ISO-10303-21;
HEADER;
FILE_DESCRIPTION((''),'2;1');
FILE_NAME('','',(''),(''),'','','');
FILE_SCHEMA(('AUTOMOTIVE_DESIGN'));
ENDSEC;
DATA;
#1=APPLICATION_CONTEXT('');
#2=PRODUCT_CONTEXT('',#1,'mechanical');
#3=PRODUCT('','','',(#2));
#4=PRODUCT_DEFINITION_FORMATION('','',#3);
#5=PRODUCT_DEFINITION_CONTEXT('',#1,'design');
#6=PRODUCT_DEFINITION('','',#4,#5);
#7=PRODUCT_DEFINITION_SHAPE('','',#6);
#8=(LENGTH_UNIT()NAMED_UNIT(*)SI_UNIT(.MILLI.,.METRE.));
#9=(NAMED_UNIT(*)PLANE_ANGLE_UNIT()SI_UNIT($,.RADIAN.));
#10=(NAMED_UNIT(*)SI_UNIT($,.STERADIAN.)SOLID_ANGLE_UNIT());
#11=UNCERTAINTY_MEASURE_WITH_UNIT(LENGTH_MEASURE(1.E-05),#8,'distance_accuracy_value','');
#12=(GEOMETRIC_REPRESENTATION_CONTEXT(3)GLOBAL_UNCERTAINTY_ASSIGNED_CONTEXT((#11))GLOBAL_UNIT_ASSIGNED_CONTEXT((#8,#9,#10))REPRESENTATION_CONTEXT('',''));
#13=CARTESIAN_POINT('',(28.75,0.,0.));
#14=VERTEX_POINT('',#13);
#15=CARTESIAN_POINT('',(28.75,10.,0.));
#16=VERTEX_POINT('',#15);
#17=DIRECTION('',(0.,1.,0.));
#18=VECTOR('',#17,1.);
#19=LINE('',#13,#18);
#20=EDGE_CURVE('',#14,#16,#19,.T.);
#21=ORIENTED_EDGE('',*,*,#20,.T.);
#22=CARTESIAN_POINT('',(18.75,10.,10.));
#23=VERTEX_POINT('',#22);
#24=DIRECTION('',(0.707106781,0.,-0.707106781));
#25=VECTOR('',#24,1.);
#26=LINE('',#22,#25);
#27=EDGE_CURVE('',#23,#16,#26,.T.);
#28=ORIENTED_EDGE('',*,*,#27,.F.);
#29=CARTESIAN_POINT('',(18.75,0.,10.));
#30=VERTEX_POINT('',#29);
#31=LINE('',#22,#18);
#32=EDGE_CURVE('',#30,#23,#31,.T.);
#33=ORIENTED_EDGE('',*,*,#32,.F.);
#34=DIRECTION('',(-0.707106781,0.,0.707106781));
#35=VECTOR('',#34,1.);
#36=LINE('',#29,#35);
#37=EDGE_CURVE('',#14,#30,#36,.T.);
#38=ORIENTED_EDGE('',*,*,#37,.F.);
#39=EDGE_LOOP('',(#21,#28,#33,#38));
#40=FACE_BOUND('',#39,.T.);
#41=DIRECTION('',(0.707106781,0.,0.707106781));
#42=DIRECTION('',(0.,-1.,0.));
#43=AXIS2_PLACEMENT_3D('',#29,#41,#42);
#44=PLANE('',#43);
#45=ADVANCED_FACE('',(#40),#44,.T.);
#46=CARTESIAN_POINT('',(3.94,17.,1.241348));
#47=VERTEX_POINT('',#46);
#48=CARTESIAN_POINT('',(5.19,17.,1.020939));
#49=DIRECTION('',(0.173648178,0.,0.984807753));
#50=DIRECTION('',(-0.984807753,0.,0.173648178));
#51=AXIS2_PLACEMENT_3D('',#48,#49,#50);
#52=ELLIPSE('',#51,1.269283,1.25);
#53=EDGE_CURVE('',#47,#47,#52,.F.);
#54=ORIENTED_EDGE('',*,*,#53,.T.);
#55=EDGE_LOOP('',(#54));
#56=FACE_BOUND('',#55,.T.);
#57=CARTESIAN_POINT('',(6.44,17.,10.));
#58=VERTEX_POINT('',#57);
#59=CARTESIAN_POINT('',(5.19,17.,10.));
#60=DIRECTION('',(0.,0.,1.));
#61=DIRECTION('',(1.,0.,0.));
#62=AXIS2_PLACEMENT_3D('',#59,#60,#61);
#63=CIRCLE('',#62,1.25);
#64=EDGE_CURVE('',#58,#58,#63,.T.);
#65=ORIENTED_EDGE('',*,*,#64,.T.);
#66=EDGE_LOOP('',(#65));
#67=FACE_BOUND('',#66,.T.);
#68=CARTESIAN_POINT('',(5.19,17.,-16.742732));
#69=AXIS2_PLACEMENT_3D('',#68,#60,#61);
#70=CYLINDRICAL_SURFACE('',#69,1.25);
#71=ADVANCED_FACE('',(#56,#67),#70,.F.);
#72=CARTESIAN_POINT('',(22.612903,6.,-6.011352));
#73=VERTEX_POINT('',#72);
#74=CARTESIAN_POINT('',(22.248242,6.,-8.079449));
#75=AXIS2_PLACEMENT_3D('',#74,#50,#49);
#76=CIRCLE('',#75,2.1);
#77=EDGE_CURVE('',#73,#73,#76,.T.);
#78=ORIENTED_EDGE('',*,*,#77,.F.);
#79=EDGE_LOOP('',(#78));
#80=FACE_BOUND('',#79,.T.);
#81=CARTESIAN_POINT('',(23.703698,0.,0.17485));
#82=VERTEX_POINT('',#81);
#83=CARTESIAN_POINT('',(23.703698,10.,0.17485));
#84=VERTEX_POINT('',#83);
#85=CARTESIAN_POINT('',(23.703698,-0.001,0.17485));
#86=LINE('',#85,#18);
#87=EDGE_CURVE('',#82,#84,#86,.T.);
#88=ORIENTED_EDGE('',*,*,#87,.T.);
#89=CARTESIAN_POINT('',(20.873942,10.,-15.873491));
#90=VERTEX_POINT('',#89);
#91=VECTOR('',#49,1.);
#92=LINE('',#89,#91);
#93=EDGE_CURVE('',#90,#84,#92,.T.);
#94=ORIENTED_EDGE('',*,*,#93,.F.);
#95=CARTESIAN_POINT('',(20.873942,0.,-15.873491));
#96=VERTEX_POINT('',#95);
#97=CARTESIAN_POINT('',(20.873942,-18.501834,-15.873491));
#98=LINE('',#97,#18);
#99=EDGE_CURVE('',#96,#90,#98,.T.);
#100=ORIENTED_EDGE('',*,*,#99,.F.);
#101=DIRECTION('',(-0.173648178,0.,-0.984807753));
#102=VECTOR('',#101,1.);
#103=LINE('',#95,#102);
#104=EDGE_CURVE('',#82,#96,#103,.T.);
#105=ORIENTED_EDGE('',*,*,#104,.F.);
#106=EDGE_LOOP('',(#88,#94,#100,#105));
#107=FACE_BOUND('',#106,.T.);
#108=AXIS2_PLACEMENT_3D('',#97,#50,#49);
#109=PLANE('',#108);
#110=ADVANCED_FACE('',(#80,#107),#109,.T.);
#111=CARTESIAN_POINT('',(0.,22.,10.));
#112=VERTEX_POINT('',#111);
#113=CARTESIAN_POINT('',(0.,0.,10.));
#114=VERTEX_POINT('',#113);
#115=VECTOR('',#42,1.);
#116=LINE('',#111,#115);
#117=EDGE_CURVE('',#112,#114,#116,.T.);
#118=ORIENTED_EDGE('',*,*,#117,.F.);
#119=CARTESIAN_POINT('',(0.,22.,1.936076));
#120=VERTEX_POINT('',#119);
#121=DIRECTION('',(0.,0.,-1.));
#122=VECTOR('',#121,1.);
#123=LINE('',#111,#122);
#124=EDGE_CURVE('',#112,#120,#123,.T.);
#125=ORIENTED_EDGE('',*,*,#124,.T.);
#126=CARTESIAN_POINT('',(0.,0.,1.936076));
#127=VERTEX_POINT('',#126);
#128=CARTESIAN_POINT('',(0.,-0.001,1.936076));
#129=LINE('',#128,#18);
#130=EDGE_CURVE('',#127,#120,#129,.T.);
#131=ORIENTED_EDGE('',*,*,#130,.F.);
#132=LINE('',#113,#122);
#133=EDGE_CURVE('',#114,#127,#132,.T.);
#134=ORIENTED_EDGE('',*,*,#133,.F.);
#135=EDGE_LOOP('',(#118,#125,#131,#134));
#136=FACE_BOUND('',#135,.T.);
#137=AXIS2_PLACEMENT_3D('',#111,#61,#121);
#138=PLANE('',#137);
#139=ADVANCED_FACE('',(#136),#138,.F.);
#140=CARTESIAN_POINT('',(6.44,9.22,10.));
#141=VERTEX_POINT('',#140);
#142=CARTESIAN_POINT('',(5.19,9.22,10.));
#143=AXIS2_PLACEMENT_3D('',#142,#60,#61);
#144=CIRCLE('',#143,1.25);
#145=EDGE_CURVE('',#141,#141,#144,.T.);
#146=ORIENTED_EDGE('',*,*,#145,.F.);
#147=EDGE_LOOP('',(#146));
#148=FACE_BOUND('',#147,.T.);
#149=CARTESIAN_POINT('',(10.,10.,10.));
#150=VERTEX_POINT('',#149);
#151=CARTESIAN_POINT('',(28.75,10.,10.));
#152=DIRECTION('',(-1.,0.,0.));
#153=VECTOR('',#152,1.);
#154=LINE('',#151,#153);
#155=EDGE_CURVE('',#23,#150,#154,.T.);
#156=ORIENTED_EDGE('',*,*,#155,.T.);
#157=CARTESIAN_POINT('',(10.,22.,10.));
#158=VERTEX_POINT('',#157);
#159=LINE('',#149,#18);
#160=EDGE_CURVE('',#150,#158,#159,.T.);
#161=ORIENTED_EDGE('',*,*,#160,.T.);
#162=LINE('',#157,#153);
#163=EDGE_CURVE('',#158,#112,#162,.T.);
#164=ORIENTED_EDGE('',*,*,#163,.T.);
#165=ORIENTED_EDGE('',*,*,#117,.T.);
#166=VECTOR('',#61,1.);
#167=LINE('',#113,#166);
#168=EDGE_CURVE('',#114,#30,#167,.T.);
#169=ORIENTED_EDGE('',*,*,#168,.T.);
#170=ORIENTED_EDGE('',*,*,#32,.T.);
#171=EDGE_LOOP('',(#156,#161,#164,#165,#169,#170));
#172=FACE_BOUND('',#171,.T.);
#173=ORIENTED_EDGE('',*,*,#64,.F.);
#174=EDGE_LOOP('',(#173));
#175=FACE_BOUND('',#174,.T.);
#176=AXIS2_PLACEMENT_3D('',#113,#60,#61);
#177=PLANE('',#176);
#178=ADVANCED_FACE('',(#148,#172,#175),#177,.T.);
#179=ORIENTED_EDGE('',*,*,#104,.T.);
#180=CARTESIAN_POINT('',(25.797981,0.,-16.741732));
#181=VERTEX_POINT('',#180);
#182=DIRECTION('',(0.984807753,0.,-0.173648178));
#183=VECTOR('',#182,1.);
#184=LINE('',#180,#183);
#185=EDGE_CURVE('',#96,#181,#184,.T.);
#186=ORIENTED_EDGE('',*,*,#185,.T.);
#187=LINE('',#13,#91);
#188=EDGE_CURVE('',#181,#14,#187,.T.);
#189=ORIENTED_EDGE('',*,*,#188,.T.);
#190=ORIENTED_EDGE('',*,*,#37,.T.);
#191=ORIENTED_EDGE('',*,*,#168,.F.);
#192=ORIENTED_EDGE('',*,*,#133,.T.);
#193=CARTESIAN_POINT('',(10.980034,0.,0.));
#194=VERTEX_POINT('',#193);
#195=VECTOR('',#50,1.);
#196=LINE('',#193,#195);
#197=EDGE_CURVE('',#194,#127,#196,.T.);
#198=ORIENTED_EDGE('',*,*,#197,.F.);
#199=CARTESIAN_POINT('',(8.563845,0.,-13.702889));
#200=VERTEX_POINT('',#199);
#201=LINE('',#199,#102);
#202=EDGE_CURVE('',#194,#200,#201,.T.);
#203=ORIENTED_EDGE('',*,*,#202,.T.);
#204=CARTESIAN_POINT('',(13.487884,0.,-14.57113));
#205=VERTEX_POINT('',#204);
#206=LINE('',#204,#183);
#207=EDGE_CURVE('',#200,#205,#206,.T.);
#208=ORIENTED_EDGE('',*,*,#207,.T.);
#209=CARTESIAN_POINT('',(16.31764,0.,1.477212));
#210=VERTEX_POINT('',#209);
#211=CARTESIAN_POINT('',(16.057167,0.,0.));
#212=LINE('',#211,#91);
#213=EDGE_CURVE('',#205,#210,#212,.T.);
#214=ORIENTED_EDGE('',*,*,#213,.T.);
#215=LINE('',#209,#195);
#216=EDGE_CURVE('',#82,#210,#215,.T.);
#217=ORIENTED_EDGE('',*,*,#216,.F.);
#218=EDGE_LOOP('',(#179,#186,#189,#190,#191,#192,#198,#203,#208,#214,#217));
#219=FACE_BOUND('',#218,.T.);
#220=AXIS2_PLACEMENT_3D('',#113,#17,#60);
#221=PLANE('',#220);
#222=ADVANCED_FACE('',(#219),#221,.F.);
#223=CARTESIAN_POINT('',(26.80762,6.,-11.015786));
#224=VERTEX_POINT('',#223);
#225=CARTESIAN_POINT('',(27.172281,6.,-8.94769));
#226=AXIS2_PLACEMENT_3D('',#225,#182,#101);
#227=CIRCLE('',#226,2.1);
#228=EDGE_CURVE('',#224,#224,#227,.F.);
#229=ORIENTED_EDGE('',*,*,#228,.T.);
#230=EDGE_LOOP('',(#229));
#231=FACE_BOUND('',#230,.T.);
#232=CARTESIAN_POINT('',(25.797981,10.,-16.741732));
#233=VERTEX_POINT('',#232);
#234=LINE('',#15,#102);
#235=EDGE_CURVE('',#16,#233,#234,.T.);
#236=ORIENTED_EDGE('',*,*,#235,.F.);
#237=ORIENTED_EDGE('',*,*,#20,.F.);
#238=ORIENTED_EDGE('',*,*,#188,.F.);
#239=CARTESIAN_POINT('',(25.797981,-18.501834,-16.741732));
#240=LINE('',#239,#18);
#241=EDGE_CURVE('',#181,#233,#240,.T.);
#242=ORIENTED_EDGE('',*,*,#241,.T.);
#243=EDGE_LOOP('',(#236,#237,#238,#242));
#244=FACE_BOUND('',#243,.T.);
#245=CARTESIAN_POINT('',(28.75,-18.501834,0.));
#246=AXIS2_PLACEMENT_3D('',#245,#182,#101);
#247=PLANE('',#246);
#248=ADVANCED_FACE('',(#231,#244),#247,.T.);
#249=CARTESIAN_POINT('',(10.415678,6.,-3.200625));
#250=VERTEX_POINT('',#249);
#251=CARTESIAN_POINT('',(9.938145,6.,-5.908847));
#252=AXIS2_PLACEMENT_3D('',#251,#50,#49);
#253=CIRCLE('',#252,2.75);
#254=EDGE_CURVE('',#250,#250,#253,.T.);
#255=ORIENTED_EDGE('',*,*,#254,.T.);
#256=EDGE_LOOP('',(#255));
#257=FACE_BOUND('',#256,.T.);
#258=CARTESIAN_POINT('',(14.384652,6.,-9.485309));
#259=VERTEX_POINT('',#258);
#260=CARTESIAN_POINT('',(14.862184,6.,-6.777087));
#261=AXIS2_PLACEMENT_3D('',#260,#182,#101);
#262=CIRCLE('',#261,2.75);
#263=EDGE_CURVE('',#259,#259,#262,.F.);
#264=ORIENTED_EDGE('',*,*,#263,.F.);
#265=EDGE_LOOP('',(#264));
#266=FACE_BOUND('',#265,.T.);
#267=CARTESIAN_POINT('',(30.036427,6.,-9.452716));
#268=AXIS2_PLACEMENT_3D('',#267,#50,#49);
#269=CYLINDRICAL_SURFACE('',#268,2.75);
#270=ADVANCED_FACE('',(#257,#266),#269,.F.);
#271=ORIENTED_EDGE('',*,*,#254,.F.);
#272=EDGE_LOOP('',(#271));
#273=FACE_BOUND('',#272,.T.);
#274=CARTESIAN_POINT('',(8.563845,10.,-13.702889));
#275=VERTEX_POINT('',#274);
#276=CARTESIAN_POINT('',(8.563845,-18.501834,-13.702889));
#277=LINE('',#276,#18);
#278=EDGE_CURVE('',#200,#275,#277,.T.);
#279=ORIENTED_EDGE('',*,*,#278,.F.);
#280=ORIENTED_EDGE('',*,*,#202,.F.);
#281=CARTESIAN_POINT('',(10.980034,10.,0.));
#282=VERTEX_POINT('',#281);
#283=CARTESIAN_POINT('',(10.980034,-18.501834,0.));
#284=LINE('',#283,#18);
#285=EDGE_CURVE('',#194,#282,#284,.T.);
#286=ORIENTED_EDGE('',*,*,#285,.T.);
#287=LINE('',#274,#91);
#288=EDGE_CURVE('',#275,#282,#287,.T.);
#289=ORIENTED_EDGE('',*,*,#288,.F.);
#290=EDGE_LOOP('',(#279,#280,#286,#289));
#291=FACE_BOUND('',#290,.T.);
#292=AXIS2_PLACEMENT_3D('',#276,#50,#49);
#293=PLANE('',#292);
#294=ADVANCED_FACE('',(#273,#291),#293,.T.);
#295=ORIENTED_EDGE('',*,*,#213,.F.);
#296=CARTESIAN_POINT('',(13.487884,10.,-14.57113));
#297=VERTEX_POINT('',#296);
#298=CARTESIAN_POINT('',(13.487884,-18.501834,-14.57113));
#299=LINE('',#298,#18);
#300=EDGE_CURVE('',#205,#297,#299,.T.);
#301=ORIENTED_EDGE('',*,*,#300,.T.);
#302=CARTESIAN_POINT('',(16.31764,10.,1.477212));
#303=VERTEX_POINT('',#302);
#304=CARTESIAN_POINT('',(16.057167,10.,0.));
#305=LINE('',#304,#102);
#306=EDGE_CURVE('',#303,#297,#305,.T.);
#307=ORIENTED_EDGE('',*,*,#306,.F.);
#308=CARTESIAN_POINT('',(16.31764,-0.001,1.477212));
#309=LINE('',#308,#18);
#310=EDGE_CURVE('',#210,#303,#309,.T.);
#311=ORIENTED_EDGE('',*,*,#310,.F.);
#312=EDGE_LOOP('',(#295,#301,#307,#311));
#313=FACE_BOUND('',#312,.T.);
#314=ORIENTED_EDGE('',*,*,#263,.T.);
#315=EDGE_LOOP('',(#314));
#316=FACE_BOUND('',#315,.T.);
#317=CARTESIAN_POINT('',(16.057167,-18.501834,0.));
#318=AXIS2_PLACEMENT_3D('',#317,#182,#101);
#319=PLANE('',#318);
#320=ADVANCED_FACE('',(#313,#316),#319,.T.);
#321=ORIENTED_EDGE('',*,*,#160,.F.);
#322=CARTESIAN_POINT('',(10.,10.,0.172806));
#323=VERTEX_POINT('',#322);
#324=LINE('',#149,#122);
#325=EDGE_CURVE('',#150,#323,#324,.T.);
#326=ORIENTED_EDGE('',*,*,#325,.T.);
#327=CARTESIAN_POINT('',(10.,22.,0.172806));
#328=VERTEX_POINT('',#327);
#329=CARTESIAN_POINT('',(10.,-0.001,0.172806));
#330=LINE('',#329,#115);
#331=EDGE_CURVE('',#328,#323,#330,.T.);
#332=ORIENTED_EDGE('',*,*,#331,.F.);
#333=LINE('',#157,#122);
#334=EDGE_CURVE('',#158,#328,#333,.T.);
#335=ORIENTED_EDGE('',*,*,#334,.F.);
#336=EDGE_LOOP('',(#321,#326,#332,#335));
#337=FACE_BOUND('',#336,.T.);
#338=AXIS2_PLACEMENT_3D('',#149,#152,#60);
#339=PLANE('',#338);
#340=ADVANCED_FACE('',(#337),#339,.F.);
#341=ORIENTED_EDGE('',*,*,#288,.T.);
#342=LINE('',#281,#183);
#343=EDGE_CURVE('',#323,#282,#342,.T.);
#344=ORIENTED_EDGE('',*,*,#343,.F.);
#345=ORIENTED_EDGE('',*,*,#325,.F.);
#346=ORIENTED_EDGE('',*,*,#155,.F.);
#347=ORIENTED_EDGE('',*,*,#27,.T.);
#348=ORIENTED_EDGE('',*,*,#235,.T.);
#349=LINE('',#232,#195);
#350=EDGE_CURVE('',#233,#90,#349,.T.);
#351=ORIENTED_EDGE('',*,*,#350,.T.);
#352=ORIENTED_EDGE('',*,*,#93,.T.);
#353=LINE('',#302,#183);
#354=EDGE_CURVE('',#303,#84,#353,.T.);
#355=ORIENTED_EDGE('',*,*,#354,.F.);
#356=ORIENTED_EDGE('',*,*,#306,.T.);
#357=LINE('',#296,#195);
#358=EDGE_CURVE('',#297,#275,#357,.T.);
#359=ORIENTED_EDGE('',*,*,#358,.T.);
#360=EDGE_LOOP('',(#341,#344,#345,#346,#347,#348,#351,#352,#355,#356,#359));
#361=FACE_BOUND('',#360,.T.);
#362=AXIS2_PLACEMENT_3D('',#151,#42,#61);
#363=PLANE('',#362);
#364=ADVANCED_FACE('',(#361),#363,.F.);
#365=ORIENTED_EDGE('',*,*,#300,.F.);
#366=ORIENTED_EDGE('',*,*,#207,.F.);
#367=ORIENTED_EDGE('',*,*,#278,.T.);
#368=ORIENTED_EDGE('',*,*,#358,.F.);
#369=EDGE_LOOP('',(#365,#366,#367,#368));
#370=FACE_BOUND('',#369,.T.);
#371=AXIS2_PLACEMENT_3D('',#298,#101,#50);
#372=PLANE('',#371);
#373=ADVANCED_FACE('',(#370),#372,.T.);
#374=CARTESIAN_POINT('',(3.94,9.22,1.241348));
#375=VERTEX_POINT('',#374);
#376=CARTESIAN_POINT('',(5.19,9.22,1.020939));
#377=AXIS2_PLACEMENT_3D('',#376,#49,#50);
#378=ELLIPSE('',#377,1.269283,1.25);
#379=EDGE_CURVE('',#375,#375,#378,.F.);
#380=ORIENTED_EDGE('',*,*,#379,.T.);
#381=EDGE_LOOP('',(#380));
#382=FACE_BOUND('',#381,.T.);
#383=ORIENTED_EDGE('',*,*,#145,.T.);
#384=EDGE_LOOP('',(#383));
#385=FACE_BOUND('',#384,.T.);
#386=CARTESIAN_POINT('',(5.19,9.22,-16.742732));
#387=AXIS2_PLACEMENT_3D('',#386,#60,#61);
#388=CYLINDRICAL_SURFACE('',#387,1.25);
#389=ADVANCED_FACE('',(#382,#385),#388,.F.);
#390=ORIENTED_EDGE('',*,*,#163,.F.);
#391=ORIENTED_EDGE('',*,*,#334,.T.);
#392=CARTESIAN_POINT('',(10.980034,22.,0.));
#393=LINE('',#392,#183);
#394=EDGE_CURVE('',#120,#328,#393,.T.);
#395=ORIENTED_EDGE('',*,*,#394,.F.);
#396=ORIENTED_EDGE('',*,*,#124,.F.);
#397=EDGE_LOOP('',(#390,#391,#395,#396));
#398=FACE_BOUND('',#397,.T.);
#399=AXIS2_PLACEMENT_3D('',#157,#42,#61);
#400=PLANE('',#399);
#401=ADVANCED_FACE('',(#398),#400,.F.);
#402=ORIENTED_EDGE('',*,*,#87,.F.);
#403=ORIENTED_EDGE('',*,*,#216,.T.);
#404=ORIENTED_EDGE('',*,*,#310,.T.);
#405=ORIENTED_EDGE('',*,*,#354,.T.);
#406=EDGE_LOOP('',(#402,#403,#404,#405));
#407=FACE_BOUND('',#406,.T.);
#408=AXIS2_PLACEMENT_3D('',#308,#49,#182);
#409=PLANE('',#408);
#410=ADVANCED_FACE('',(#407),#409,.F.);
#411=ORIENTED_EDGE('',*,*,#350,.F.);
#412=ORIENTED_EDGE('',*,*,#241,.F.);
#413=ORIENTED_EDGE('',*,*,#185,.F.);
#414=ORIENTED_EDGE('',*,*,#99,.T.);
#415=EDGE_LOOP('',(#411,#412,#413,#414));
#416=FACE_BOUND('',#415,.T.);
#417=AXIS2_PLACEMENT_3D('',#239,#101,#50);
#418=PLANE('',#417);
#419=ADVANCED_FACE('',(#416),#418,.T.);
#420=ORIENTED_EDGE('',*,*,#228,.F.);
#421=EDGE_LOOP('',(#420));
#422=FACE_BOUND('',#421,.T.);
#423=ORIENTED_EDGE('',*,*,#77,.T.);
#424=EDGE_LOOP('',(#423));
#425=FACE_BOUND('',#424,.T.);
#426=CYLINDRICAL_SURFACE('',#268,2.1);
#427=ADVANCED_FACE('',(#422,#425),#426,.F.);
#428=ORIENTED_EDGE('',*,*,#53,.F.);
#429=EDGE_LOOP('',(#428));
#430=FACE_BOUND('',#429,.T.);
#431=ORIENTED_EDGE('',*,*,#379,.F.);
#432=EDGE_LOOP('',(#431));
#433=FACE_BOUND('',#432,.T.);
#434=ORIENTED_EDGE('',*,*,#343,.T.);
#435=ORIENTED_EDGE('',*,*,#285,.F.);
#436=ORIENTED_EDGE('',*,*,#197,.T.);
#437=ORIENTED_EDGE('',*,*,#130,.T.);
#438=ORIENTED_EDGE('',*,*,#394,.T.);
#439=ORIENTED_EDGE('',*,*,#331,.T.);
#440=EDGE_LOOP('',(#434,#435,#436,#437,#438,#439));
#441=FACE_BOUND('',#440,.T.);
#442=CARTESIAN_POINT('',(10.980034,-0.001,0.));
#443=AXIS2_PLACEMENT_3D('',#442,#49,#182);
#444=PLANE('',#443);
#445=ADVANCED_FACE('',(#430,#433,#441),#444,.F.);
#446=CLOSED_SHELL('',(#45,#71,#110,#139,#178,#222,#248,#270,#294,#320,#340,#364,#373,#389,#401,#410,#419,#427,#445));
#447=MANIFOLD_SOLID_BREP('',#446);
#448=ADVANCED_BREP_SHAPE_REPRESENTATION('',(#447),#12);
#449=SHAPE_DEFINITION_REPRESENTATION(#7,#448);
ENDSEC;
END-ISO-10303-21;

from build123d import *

# Parameters (mm, degrees)
BOSS_EXTRU_1_DEPTH      = 10
BOSS_EXTRU_2_DEPTH      = 10
ENL_V_MAT_EXTRU_1_REACH = 37.367
ENL_V_MAT_EXTRU_2_REACH = 34.134
ESQUISSE4_R             = 2.75
ENL_V_MAT_EXTRU_3_REACH = 36.763
ESQUISSE5_R             = 2.1
CHANFREIN1_SIZE         = 10
ENL_V_MAT_EXTRU_4_REACH = 41.885
ENL_V_MAT_EXTRU_5_REACH = 47.008
ESQUISSE7_R             = 1.25


with BuildPart() as part:
    # Esquisse1 → Boss.-Extru.1 (new body)
    with BuildSketch(Plane.XY):
        Polygon((0, 0), (28.75, 0), (28.75, 10), (10, 10), (10, 22), (0, 22), align=None)
    extrude(amount=BOSS_EXTRU_1_DEPTH)

    # Esquisse2 → Boss.-Extru.2 (add)
    with BuildSketch(Plane(origin=(0, 10, 0), x_dir=(1, 0, 0), z_dir=(0, 1, 0))):
        Polygon((28.75, 0), (25.79798098, 16.741731801), (20.873942215, 15.873490913), (23.672866941, 0), align=None)
        Polygon((16.057167351, 0), (13.487884067, 14.57112958), (8.563845302, 13.702888692), (10.980034292, 0), align=None)
    extrude(amount=-BOSS_EXTRU_2_DEPTH)

    # Esquisse3 → Enlèv. mat.-Extru.1 (cut, up to next)
    with BuildSketch(Plane(origin=(0, 10, 0), x_dir=(1, 0, 0), z_dir=(0, 1, 0)), mode=Mode.PRIVATE) as enl_v_mat_extru_1_sk1:
        Polygon((16.057167351, 0), (16.317639618, -1.47721163), (23.703697766, -0.174850297), (23.672866941, 0), align=None)
    enl_v_mat_extru_1_tool1 = extrude(enl_v_mat_extru_1_sk1.sketch, amount=-ENL_V_MAT_EXTRU_1_REACH, mode=Mode.PRIVATE) & part.part
    add(enl_v_mat_extru_1_tool1.solids().sort_by_distance((18.952321, 10, 0.498572))[0], mode=Mode.SUBTRACT)

    # Esquisse4 → Enlèv. mat.-Extru.2 (cut, up to next)
    with BuildSketch(Plane(origin=(10.648945746, 0, -1.877696451), x_dir=(0.1736481776669311, 0, 0.9848077530122079), z_dir=(-0.9848077530122079, 0, 0.1736481776669311)), mode=Mode.PRIVATE) as enl_v_mat_extru_2_sk1:
        with Locations((-4.093337054, 6)):
            Circle(ESQUISSE4_R)
    enl_v_mat_extru_2_tool1 = extrude(enl_v_mat_extru_2_sk1.sketch, amount=-ENL_V_MAT_EXTRU_2_REACH, mode=Mode.PRIVATE) & part.part
    add(enl_v_mat_extru_2_tool1.solids().sort_by_distance((9.938145, 6, -5.908847))[0], mode=Mode.SUBTRACT)

    # Esquisse5 → Enlèv. mat.-Extru.3 (cut, up to next)
    with BuildSketch(Plane(origin=(22.959042659, 0, -4.048298672), x_dir=(0.1736481776669306, 0, 0.9848077530122081), z_dir=(-0.9848077530122081, 0, 0.1736481776669306)), mode=Mode.PRIVATE) as enl_v_mat_extru_3_sk1:
        with Locations((-4.093337054, 6)):
            Circle(ESQUISSE5_R)
    enl_v_mat_extru_3_tool1 = extrude(enl_v_mat_extru_3_sk1.sketch, amount=-ENL_V_MAT_EXTRU_3_REACH, mode=Mode.PRIVATE) & part.part
    add(enl_v_mat_extru_3_tool1.solids().sort_by_distance((22.248242, 6, -8.079449))[0], mode=Mode.SUBTRACT)

    # Chanfrein1
    chanfrein1_edges = [part.edges().sort_by_distance(p)[0] for p in [
        (28.75, 5, 10),
    ]]
    chamfer(chanfrein1_edges, length=CHANFREIN1_SIZE - 0.0001)  # a hair under: the kernel refuses the full size

    # Esquisse6 → Enlèv. mat.-Extru.4 (cut, up to next)
    with BuildSketch(Plane(origin=(0, 22, 0), x_dir=(1, 0, 0), z_dir=(0, 1, 0)), mode=Mode.PRIVATE) as enl_v_mat_extru_4_sk1:
        Polygon((0, 0), (10.980034292, 0), (0, -1.936076295), align=None)
    enl_v_mat_extru_4_tool1 = extrude(enl_v_mat_extru_4_sk1.sketch, amount=-ENL_V_MAT_EXTRU_4_REACH, mode=Mode.PRIVATE) & part.part
    add(enl_v_mat_extru_4_tool1.solids().sort_by_distance((3.660011, 22, 0.645359))[0], mode=Mode.SUBTRACT)

    # Enlèv. mat.-Extru.5: up to this plane
    enl_v_mat_extru_5_end = Plane(origin=(10.980034292, -0.001, 0), z_dir=(0.17364817766693136, 0, 0.9848077530122079))
    # Esquisse7 → Enlèv. mat.-Extru.5 (cut, up to the surface)
    with BuildSketch(Plane.XY.offset(10), mode=Mode.PRIVATE) as enl_v_mat_extru_5_sk1:
        with Locations((5.19, 17)):
            Circle(ESQUISSE7_R)
    enl_v_mat_extru_5_tool1 = split(extrude(enl_v_mat_extru_5_sk1.sketch, amount=-ENL_V_MAT_EXTRU_5_REACH, mode=Mode.PRIVATE), bisect_by=enl_v_mat_extru_5_end, keep=Keep.BOTH, mode=Mode.PRIVATE)
    add(enl_v_mat_extru_5_tool1.solids().sort_by_distance((5.19, 17, 10))[0], mode=Mode.SUBTRACT)
    # Esquisse7 → Enlèv. mat.-Extru.5 (cut, up to the surface)
    with BuildSketch(Plane.XY.offset(10), mode=Mode.PRIVATE) as enl_v_mat_extru_5_sk2:
        with Locations((5.19, 9.22)):
            Circle(ESQUISSE7_R)
    enl_v_mat_extru_5_tool2 = split(extrude(enl_v_mat_extru_5_sk2.sketch, amount=-ENL_V_MAT_EXTRU_5_REACH, mode=Mode.PRIVATE), bisect_by=enl_v_mat_extru_5_end, keep=Keep.BOTH, mode=Mode.PRIVATE)
    add(enl_v_mat_extru_5_tool2.solids().sort_by_distance((5.19, 9.22, 10))[0], mode=Mode.SUBTRACT)


solid = part.part
